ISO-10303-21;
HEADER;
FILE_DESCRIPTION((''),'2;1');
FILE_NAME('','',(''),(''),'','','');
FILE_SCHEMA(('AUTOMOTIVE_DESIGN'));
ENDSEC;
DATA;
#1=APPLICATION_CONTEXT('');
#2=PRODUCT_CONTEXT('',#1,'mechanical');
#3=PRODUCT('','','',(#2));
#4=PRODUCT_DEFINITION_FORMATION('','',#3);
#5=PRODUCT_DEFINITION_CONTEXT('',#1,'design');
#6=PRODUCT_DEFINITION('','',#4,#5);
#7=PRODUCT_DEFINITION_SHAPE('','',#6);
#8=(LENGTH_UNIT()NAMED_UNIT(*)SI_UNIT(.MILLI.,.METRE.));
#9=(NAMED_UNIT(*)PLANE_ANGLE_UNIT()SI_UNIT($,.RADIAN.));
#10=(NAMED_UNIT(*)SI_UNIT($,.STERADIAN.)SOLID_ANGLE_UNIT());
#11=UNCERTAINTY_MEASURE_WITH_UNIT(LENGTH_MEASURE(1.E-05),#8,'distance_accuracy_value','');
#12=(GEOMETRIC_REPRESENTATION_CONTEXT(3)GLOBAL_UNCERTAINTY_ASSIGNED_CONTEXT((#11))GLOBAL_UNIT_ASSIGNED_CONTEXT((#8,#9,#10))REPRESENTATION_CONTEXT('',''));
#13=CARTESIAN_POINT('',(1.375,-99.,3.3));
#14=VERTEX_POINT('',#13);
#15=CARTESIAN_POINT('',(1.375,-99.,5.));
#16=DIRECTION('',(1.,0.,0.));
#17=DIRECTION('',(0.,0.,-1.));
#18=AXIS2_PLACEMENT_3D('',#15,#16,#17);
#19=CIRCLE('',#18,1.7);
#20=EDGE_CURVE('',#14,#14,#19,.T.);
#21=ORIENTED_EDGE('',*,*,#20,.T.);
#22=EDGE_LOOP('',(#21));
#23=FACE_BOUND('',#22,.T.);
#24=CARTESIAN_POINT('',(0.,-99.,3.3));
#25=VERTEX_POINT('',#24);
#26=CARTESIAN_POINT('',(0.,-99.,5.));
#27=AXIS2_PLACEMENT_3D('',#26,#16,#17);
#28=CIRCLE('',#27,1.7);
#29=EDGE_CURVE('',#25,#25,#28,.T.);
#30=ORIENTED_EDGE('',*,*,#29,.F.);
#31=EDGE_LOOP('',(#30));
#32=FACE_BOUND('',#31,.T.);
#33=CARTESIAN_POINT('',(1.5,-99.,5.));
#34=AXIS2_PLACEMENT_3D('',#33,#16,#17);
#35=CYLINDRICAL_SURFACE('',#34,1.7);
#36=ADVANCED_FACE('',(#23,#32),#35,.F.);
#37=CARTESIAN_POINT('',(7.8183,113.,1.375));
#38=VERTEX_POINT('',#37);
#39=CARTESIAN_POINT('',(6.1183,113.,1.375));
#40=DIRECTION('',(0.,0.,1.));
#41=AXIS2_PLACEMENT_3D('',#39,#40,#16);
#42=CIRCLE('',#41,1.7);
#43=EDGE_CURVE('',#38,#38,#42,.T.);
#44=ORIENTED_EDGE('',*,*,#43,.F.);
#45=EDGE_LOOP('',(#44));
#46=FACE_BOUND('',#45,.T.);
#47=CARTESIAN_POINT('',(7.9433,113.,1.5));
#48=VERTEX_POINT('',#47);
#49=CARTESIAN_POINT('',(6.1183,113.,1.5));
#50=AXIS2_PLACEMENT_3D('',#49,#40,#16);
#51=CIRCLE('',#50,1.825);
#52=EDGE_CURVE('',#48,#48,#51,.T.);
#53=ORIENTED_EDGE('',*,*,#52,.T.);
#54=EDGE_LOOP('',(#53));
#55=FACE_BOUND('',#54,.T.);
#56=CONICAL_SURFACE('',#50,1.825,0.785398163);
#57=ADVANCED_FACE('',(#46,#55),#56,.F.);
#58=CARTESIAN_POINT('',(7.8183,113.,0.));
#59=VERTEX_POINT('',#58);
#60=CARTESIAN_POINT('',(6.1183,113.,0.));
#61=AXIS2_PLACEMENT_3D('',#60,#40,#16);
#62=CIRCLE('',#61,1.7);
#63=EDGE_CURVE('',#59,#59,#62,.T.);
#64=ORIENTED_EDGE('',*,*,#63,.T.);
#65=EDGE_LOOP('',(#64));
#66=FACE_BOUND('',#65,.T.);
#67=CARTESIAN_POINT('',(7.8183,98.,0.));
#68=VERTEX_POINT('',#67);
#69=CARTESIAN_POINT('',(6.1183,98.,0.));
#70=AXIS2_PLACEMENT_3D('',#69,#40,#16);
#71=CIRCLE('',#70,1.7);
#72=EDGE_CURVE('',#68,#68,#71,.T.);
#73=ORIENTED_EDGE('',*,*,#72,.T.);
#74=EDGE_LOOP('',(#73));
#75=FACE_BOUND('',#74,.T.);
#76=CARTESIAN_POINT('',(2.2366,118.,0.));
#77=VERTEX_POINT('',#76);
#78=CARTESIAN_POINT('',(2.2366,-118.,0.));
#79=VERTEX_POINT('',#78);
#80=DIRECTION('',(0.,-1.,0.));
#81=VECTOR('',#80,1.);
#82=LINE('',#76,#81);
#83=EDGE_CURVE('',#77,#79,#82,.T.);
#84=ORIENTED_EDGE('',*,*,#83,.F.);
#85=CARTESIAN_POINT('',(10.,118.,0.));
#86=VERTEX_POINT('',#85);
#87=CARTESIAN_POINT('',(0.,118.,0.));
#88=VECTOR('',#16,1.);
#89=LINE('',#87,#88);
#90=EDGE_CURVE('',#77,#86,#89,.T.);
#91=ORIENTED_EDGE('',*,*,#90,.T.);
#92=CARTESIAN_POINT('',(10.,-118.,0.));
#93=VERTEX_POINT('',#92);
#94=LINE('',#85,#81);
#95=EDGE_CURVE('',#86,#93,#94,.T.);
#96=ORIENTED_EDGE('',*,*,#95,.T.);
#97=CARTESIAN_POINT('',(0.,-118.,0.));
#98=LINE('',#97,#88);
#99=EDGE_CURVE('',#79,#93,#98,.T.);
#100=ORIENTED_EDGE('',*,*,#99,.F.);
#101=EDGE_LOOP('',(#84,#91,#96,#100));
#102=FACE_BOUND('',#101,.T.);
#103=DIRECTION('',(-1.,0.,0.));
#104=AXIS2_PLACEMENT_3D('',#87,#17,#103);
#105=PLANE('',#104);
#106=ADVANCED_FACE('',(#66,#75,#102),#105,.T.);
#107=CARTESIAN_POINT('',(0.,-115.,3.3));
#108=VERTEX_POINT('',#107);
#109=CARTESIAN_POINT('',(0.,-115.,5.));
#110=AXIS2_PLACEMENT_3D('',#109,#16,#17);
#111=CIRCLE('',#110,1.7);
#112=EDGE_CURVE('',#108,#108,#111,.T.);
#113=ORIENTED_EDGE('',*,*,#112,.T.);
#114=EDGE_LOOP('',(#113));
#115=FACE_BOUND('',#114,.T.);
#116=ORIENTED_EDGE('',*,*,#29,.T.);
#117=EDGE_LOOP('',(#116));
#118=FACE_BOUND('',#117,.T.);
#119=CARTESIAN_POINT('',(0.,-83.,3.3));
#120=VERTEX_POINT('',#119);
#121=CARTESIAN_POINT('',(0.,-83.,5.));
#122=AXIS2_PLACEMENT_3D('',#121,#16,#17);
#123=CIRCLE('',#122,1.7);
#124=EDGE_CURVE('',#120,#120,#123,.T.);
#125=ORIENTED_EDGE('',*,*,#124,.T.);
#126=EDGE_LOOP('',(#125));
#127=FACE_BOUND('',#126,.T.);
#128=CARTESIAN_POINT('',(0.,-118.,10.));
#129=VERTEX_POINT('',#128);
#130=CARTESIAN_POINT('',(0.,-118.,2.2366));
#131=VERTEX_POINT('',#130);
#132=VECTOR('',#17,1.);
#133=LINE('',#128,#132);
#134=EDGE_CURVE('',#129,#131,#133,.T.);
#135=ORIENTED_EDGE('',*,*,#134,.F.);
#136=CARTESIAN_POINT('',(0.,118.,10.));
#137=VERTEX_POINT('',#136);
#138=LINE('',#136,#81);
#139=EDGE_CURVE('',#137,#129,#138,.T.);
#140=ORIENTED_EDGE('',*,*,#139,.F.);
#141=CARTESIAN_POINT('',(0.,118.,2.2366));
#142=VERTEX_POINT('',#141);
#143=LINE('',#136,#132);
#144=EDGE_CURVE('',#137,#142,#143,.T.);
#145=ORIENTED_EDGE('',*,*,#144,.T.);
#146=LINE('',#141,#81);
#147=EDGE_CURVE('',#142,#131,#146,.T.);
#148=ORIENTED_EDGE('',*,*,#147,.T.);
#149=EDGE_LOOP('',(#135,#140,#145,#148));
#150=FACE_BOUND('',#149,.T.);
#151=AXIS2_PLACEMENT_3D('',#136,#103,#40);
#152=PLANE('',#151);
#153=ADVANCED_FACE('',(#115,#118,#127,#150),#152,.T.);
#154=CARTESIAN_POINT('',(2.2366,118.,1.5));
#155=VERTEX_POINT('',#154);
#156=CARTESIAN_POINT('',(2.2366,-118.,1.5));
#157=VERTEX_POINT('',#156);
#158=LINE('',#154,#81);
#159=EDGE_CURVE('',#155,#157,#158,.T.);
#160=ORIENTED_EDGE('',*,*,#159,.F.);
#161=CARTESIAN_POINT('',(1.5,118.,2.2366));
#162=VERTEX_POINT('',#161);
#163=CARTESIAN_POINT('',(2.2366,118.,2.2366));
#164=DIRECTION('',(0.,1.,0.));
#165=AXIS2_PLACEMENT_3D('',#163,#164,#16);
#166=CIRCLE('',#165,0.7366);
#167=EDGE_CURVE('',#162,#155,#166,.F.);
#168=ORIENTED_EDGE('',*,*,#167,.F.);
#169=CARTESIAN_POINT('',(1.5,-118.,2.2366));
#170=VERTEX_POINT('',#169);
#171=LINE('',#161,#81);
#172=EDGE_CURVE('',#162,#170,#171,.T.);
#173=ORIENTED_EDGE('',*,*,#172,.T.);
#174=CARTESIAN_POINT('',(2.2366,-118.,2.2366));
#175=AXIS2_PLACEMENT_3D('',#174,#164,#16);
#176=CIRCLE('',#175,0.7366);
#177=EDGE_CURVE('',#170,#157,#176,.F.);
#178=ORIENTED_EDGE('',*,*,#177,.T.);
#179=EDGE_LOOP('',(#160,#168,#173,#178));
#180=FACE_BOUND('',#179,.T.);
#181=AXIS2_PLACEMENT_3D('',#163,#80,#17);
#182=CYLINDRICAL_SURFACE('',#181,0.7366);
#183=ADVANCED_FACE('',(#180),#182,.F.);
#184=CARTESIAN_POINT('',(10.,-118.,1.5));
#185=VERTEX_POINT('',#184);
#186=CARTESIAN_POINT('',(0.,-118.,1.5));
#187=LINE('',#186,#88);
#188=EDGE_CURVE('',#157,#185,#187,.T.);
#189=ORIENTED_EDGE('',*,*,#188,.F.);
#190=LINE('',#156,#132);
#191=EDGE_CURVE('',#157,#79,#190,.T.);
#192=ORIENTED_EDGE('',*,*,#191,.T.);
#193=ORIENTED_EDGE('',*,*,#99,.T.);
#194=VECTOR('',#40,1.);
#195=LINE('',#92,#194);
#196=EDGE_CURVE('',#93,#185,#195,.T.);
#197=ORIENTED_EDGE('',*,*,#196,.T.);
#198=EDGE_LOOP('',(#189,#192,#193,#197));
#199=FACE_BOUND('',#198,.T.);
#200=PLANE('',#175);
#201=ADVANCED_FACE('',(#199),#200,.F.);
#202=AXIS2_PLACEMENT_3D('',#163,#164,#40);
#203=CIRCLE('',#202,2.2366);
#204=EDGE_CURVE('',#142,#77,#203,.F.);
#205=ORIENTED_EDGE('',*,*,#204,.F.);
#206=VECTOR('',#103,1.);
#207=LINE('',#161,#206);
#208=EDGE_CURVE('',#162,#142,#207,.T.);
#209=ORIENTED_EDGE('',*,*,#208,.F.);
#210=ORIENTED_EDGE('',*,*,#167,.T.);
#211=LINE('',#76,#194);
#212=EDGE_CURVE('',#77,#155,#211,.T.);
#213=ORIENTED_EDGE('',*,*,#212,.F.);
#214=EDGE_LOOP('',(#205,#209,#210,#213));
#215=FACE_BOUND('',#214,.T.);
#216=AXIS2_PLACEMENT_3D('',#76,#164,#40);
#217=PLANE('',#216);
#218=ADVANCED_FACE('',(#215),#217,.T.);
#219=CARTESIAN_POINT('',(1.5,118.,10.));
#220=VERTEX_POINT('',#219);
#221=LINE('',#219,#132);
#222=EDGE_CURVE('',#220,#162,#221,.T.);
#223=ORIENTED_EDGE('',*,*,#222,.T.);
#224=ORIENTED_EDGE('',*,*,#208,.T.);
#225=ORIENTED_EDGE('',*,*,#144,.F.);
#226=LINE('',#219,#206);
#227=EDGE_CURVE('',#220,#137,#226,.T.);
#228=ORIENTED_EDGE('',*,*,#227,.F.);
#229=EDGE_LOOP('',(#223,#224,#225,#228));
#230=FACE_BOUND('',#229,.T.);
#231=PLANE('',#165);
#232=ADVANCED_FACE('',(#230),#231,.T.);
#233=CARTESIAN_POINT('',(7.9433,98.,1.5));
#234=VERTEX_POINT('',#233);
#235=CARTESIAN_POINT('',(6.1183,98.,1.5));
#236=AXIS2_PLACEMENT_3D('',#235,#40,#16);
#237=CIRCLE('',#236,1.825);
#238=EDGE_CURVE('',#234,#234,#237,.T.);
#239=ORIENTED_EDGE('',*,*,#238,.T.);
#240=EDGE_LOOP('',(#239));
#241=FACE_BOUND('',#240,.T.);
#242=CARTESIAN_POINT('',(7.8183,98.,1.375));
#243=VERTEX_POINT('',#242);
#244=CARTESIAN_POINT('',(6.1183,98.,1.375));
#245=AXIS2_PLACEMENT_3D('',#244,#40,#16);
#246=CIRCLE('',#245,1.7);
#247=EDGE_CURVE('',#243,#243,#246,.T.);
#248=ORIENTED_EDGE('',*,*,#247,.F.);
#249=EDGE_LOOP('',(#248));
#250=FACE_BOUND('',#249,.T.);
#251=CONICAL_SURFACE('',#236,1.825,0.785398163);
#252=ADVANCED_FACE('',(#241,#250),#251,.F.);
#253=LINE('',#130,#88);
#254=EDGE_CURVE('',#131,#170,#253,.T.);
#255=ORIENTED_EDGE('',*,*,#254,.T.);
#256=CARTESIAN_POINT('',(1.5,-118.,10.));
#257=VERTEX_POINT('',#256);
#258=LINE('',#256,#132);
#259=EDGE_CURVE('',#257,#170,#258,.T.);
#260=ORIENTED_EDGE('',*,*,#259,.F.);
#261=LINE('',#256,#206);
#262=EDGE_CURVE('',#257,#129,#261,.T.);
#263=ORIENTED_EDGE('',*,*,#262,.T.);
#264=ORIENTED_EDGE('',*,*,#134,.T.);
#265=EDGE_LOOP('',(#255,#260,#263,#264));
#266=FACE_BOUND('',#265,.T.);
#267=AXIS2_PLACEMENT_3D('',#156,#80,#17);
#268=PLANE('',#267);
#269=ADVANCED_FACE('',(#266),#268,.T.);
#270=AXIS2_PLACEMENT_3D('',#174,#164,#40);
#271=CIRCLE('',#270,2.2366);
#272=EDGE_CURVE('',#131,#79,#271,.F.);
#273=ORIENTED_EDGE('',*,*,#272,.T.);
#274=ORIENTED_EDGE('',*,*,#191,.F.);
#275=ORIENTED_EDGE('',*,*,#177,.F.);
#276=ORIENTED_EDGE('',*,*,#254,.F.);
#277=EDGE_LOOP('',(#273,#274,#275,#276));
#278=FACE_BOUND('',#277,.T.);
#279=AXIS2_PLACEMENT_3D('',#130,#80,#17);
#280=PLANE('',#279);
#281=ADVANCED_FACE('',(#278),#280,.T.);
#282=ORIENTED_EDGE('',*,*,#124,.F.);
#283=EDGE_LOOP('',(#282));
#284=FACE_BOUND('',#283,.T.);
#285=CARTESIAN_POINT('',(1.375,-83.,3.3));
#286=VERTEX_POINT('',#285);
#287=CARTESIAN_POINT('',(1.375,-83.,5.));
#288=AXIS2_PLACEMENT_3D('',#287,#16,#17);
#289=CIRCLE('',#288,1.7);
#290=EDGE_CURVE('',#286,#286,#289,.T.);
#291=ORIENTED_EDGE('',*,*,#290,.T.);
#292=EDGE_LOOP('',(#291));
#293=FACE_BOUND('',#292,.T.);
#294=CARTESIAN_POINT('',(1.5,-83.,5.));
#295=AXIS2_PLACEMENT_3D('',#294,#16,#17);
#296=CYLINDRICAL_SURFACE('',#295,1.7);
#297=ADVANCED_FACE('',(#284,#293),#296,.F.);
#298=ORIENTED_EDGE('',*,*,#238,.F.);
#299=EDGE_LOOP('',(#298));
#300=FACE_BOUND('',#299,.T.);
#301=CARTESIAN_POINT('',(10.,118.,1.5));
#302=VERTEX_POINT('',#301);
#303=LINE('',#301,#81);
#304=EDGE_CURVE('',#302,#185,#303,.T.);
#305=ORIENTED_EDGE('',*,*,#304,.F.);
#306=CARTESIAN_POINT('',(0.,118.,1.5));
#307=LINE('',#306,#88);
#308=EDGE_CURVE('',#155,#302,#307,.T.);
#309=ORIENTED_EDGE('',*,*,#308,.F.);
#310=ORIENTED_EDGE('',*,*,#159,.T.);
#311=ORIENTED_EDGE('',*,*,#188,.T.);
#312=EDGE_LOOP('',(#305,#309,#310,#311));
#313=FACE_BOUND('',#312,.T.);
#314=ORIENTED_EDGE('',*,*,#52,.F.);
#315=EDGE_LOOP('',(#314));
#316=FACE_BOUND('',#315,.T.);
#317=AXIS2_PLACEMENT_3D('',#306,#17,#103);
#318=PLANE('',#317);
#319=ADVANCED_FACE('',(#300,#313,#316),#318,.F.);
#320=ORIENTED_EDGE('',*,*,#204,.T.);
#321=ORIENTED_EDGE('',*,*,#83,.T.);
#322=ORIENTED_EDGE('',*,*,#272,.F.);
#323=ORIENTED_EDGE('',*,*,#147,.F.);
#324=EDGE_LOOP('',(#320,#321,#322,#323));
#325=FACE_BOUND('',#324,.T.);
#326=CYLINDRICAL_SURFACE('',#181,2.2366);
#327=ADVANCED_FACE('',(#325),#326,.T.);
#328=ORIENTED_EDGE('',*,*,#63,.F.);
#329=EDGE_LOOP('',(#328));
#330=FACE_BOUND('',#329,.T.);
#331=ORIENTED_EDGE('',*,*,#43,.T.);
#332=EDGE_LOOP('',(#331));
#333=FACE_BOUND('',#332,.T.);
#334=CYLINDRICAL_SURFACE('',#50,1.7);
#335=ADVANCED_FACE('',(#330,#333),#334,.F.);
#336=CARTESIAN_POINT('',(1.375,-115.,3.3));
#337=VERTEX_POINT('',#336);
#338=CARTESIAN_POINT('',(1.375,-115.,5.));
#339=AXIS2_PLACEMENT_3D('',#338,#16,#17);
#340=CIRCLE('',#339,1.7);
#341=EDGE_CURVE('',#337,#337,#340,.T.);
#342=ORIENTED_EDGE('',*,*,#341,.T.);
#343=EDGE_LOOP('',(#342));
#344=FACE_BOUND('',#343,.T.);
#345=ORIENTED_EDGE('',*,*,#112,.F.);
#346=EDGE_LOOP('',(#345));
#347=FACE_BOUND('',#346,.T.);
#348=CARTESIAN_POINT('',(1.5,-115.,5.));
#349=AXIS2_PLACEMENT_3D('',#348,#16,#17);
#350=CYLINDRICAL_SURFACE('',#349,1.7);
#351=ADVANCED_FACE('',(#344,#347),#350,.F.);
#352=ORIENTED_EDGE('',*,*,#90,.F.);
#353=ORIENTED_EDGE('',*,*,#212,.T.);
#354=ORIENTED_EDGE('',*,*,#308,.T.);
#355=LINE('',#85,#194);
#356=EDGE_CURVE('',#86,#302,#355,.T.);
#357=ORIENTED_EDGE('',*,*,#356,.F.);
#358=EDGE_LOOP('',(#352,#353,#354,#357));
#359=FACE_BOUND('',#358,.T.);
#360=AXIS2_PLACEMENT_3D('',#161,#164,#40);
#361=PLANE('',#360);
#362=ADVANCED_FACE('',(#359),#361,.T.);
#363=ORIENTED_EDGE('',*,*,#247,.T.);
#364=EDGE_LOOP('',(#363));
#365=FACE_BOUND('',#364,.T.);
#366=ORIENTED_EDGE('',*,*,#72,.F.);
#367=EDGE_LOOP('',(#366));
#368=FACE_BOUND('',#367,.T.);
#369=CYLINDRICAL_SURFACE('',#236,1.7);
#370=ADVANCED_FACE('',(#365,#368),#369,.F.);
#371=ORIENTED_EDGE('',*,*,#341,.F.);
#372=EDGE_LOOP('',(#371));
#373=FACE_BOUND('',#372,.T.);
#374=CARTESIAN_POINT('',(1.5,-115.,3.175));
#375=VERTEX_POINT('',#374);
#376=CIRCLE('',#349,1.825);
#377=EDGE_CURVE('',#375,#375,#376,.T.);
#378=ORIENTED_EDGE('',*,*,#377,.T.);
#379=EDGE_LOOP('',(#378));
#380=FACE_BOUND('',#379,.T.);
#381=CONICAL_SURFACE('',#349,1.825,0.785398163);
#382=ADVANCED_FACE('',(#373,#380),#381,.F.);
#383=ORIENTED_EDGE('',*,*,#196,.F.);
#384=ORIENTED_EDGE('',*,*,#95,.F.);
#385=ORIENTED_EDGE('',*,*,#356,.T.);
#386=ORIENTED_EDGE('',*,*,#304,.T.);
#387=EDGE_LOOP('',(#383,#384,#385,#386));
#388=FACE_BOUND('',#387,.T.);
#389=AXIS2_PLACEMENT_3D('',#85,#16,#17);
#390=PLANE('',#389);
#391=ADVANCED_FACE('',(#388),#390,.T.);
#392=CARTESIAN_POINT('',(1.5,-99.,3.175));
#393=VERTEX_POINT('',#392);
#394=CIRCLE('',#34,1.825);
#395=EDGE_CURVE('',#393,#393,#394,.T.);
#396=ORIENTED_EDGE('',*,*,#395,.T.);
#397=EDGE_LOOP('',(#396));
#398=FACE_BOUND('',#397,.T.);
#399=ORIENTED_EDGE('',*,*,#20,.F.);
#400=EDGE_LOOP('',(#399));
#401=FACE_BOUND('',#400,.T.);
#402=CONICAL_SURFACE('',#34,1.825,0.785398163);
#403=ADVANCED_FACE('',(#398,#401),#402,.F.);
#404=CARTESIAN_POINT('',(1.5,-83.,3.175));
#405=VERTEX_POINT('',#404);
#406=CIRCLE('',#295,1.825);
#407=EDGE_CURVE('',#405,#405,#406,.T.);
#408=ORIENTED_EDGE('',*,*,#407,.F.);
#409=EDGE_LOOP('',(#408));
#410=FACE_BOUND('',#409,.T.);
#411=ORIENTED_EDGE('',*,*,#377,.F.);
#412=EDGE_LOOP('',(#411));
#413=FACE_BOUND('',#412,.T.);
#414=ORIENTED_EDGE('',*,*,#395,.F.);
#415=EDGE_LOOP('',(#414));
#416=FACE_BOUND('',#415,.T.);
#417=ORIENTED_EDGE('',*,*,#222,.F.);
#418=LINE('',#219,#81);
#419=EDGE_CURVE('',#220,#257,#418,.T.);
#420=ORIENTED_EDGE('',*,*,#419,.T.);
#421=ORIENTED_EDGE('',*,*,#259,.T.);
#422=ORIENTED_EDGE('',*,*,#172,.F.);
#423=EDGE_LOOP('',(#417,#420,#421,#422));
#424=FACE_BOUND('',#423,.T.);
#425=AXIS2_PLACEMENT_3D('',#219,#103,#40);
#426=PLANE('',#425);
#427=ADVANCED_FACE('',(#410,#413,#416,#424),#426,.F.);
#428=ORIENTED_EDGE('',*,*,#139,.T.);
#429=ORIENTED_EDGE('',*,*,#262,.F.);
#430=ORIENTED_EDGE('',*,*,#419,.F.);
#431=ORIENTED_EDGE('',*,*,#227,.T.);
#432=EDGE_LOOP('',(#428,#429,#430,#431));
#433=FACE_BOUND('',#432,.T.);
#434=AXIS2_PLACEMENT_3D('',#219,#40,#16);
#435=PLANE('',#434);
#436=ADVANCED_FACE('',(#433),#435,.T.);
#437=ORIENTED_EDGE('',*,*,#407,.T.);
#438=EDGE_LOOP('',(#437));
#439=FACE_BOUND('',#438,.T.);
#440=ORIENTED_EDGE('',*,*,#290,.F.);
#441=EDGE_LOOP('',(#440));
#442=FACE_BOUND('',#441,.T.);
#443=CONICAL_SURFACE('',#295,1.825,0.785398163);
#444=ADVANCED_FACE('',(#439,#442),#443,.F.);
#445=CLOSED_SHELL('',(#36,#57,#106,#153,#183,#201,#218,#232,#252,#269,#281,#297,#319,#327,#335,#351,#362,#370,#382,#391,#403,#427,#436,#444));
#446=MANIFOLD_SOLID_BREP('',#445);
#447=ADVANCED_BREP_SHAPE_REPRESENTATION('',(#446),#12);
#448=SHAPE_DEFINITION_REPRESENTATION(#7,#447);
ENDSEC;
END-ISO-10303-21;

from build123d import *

# Parameters (mm, degrees)
BASE_FLANGE1_DEPTH            = 118
M3_CLEARANCE_HOLE1_AT_2_COUNT = 2
M3_CLEARANCE_HOLE1_AT_2_PITCH = 15
M3_CLEARANCE_HOLE2_AT_2_COUNT = 2
M3_CLEARANCE_HOLE2_AT_2_PITCH = 16
M3_CLEARANCE_HOLE2_AT_3_COUNT = 2
M3_CLEARANCE_HOLE2_AT_3_PITCH = 32


# Sheet-metal steps are written as plain solids
with BuildPart() as part:
    # Sketch1 → Base-Flange1 (new, symmetric)
    with BuildSketch(Plane(origin=(0, 0, 0), x_dir=(1, 0, 0), z_dir=(0, 1, 0))):
        with BuildLine():
            Line((0, -10), (0, -2.2366))
            ThreePointArc((0, -2.2366), (0.655084973, -0.655084973), (2.2366, 0))
            Line((2.2366, 0), (10, 0))
            Line((10, 0), (10, -1.5))
            Line((10, -1.5), (2.2366, -1.5))
            ThreePointArc((2.2366, -1.5), (1.715745145, -1.715745145), (1.5, -2.2366))
            Line((1.5, -2.2366), (1.5, -10))
            Line((1.5, -10), (0, -10))
        make_face()
    extrude(amount=BASE_FLANGE1_DEPTH, both=True)

    # Sketch9 → M3 Clearance Hole1 (revolve, cut)
    with BuildSketch(Plane(origin=(6.1183, 113, 1.5), x_dir=(0, -1, 0), z_dir=(1, 0, 0))):
        Polygon((0, 0), (0, 1.5), (1.7, 1.5), (1.7, 0.125), (1.825, 0), align=None)
    m3_clearance_hole1 = revolve(axis=Axis((6.1183, 113, 7.85), (0, 0, -1)), mode=Mode.SUBTRACT)

    # M3 Clearance Hole1 at 2: M3 Clearance Hole1 ×2
    with Locations(*[(0, -i * M3_CLEARANCE_HOLE1_AT_2_PITCH, 0) for i in range(1, M3_CLEARANCE_HOLE1_AT_2_COUNT)]):
        add(m3_clearance_hole1, mode=Mode.SUBTRACT)

    # Sketch12 → M3 Clearance Hole2 (revolve, cut)
    with BuildSketch(Plane(origin=(1.5, -115, 5), x_dir=(0, 0, -1), z_dir=(0, 1, 0))):
        Polygon((0, 0), (0, 1.5), (1.7, 1.5), (1.7, 0.125), (1.825, 0), align=None)
    m3_clearance_hole2 = revolve(axis=Axis((7.85, -115, 5), (-1, 0, 0)), mode=Mode.SUBTRACT)

    # M3 Clearance Hole2 at 2: M3 Clearance Hole2 ×2
    with Locations(*[(0, i * M3_CLEARANCE_HOLE2_AT_2_PITCH, 0) for i in range(1, M3_CLEARANCE_HOLE2_AT_2_COUNT)]):
        add(m3_clearance_hole2, mode=Mode.SUBTRACT)

    # M3 Clearance Hole2 at 3: M3 Clearance Hole2 ×2
    with Locations(*[(0, i * M3_CLEARANCE_HOLE2_AT_3_PITCH, 0) for i in range(1, M3_CLEARANCE_HOLE2_AT_3_COUNT)]):
        add(m3_clearance_hole2, mode=Mode.SUBTRACT)


solid = part.part
